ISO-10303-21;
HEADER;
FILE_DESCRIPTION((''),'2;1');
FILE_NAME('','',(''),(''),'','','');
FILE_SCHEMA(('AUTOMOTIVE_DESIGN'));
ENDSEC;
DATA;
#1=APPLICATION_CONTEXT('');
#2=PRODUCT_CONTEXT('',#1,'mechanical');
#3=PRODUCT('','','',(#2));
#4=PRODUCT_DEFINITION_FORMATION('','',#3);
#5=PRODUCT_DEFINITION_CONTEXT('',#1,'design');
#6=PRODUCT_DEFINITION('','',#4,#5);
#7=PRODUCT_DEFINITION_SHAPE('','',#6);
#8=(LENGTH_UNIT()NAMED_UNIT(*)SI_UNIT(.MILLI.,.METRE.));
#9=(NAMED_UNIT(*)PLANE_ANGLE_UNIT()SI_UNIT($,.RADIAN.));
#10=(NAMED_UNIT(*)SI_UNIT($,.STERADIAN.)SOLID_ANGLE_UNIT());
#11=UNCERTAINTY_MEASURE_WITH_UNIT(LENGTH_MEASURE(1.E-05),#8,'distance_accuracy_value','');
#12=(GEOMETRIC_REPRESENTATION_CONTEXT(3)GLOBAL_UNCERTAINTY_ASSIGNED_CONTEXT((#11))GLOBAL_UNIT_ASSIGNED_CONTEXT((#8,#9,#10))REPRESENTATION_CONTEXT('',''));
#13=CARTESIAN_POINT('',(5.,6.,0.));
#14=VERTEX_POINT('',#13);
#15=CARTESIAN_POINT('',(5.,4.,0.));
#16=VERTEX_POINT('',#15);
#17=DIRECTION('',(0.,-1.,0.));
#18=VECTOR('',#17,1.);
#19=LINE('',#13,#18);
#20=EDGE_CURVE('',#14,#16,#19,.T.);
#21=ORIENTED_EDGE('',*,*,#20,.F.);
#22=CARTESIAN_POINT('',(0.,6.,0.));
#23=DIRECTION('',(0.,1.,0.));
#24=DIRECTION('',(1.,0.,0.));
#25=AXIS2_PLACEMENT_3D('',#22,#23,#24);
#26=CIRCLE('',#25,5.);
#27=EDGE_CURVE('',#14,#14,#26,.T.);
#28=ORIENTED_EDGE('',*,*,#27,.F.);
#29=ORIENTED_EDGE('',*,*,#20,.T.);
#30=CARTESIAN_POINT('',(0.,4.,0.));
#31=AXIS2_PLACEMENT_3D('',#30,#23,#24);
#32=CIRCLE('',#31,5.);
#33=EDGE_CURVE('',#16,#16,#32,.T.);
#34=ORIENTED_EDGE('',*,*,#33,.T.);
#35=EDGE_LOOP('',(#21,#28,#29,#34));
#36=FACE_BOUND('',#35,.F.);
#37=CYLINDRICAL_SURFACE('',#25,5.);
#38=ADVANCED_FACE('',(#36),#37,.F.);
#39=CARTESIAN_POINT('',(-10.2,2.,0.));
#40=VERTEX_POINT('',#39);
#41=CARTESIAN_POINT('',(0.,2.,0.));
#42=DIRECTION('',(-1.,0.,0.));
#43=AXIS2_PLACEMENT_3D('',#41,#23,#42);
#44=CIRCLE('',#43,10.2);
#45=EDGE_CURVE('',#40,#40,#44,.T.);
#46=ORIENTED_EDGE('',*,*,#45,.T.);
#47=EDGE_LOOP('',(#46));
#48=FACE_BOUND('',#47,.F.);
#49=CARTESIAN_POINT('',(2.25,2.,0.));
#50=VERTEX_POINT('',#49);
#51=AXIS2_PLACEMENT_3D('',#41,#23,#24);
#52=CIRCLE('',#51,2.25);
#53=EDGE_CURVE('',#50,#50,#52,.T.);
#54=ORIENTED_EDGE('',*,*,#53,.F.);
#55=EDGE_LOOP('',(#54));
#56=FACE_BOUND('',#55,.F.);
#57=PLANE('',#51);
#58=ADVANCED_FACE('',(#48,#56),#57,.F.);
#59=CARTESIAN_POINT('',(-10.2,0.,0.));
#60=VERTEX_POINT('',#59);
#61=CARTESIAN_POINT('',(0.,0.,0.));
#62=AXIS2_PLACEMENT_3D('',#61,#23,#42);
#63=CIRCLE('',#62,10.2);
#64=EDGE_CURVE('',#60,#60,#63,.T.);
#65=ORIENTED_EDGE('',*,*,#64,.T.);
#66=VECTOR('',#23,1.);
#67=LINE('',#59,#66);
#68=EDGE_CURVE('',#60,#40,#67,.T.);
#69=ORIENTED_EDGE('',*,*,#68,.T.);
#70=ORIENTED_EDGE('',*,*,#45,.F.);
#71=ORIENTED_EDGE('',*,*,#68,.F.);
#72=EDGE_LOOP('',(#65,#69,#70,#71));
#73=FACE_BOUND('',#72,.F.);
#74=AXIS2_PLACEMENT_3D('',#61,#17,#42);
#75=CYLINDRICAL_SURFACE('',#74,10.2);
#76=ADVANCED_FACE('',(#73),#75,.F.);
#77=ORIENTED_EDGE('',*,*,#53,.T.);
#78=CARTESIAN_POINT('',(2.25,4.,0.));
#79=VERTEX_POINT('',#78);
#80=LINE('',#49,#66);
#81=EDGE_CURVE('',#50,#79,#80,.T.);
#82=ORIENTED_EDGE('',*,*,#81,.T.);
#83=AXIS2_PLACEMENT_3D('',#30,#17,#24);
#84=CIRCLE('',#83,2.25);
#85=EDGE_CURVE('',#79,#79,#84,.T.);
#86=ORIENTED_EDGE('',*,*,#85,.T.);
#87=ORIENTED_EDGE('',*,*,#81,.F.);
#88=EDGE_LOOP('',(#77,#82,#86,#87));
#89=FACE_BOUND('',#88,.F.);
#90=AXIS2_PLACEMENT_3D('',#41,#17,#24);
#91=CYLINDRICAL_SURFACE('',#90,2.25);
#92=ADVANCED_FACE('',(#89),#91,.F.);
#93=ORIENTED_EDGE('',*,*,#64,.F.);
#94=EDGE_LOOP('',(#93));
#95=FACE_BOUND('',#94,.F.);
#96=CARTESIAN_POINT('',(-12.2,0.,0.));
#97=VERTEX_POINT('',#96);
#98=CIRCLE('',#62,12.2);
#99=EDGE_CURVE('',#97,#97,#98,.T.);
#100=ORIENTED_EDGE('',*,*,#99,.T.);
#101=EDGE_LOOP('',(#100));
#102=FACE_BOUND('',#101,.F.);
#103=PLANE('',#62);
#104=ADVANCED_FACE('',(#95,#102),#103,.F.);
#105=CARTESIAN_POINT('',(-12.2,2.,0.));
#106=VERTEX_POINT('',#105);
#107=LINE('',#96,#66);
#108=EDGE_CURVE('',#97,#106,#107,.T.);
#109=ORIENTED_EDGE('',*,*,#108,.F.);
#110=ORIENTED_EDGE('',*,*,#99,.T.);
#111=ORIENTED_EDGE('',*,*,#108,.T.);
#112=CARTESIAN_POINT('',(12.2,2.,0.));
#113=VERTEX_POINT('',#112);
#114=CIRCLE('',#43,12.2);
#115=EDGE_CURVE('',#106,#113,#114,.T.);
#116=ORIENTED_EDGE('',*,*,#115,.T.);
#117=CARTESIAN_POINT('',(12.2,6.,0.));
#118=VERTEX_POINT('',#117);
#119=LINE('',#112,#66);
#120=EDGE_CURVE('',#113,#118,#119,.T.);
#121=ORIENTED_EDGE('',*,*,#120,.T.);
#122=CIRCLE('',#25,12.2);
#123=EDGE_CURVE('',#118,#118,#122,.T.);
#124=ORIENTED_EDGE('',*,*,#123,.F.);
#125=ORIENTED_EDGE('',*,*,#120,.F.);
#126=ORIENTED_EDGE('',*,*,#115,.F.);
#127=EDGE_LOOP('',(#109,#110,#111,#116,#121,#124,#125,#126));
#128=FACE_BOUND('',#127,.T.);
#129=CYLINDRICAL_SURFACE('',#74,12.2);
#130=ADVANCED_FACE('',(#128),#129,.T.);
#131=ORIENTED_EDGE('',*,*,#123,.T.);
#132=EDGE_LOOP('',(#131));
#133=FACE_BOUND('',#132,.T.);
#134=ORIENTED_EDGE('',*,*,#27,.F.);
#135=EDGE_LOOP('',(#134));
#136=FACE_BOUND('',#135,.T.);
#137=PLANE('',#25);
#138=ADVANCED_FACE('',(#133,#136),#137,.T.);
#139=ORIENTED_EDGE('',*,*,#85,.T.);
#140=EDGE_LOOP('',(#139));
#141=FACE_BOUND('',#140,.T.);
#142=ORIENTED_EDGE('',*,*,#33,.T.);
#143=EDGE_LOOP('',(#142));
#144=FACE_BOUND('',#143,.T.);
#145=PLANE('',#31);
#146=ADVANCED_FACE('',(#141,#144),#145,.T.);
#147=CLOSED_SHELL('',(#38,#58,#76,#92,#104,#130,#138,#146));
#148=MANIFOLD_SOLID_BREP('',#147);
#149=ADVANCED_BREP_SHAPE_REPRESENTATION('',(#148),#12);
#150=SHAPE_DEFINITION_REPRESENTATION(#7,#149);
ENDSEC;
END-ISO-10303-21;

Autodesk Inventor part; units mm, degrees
ref_plane "YZ Plane" through (0, 0, 0) normal (1, 0, 0) x (0, 1, 0)
ref_plane "XZ Plane" through (0, 0, 0) normal (0, 1, 0) x (-1, 0, 0)
ref_plane "XY Plane" through (0, 0, 0) normal (0, 0, 1) x (1, 0, 0)
sketch "Boceto1" plane through (0, 0, 0) normal (0, 1, 0) x (-1, 0, 0)
  circle A0 centre (0, 0) radius 10.2
  circle A1 centre (0, 0) radius 12.2
  dimension "d0" = 20.4
  dimension "d1" = 2
extrude "Extrusión1" add sketch "Boceto1" along normal blind 2
sketch "Boceto2" plane through (0, 2, 0) normal (0, 1, 0) x (1, 0, 0)
  circle A0 centre (0, 0) radius 12.2 projected
  circle A1 centre (0, 0) radius 10.2 projected
  circle A2 centre (0, 0) radius 2.25
  dimension "d4" = 4.5
extrude "Extrusión2" add sketch "Boceto2" along normal blind 4 contours A0 | A1
sketch "Boceto3" plane through (0, 6, 0) normal (0, 1, 0) x (1, 0, 0)
  circle A0 centre (0, 0) radius 5
  dimension "d7" = 10
extrude "Extrusión3" cut sketch "Boceto3" against normal blind 2
properties part number "springsupport"
